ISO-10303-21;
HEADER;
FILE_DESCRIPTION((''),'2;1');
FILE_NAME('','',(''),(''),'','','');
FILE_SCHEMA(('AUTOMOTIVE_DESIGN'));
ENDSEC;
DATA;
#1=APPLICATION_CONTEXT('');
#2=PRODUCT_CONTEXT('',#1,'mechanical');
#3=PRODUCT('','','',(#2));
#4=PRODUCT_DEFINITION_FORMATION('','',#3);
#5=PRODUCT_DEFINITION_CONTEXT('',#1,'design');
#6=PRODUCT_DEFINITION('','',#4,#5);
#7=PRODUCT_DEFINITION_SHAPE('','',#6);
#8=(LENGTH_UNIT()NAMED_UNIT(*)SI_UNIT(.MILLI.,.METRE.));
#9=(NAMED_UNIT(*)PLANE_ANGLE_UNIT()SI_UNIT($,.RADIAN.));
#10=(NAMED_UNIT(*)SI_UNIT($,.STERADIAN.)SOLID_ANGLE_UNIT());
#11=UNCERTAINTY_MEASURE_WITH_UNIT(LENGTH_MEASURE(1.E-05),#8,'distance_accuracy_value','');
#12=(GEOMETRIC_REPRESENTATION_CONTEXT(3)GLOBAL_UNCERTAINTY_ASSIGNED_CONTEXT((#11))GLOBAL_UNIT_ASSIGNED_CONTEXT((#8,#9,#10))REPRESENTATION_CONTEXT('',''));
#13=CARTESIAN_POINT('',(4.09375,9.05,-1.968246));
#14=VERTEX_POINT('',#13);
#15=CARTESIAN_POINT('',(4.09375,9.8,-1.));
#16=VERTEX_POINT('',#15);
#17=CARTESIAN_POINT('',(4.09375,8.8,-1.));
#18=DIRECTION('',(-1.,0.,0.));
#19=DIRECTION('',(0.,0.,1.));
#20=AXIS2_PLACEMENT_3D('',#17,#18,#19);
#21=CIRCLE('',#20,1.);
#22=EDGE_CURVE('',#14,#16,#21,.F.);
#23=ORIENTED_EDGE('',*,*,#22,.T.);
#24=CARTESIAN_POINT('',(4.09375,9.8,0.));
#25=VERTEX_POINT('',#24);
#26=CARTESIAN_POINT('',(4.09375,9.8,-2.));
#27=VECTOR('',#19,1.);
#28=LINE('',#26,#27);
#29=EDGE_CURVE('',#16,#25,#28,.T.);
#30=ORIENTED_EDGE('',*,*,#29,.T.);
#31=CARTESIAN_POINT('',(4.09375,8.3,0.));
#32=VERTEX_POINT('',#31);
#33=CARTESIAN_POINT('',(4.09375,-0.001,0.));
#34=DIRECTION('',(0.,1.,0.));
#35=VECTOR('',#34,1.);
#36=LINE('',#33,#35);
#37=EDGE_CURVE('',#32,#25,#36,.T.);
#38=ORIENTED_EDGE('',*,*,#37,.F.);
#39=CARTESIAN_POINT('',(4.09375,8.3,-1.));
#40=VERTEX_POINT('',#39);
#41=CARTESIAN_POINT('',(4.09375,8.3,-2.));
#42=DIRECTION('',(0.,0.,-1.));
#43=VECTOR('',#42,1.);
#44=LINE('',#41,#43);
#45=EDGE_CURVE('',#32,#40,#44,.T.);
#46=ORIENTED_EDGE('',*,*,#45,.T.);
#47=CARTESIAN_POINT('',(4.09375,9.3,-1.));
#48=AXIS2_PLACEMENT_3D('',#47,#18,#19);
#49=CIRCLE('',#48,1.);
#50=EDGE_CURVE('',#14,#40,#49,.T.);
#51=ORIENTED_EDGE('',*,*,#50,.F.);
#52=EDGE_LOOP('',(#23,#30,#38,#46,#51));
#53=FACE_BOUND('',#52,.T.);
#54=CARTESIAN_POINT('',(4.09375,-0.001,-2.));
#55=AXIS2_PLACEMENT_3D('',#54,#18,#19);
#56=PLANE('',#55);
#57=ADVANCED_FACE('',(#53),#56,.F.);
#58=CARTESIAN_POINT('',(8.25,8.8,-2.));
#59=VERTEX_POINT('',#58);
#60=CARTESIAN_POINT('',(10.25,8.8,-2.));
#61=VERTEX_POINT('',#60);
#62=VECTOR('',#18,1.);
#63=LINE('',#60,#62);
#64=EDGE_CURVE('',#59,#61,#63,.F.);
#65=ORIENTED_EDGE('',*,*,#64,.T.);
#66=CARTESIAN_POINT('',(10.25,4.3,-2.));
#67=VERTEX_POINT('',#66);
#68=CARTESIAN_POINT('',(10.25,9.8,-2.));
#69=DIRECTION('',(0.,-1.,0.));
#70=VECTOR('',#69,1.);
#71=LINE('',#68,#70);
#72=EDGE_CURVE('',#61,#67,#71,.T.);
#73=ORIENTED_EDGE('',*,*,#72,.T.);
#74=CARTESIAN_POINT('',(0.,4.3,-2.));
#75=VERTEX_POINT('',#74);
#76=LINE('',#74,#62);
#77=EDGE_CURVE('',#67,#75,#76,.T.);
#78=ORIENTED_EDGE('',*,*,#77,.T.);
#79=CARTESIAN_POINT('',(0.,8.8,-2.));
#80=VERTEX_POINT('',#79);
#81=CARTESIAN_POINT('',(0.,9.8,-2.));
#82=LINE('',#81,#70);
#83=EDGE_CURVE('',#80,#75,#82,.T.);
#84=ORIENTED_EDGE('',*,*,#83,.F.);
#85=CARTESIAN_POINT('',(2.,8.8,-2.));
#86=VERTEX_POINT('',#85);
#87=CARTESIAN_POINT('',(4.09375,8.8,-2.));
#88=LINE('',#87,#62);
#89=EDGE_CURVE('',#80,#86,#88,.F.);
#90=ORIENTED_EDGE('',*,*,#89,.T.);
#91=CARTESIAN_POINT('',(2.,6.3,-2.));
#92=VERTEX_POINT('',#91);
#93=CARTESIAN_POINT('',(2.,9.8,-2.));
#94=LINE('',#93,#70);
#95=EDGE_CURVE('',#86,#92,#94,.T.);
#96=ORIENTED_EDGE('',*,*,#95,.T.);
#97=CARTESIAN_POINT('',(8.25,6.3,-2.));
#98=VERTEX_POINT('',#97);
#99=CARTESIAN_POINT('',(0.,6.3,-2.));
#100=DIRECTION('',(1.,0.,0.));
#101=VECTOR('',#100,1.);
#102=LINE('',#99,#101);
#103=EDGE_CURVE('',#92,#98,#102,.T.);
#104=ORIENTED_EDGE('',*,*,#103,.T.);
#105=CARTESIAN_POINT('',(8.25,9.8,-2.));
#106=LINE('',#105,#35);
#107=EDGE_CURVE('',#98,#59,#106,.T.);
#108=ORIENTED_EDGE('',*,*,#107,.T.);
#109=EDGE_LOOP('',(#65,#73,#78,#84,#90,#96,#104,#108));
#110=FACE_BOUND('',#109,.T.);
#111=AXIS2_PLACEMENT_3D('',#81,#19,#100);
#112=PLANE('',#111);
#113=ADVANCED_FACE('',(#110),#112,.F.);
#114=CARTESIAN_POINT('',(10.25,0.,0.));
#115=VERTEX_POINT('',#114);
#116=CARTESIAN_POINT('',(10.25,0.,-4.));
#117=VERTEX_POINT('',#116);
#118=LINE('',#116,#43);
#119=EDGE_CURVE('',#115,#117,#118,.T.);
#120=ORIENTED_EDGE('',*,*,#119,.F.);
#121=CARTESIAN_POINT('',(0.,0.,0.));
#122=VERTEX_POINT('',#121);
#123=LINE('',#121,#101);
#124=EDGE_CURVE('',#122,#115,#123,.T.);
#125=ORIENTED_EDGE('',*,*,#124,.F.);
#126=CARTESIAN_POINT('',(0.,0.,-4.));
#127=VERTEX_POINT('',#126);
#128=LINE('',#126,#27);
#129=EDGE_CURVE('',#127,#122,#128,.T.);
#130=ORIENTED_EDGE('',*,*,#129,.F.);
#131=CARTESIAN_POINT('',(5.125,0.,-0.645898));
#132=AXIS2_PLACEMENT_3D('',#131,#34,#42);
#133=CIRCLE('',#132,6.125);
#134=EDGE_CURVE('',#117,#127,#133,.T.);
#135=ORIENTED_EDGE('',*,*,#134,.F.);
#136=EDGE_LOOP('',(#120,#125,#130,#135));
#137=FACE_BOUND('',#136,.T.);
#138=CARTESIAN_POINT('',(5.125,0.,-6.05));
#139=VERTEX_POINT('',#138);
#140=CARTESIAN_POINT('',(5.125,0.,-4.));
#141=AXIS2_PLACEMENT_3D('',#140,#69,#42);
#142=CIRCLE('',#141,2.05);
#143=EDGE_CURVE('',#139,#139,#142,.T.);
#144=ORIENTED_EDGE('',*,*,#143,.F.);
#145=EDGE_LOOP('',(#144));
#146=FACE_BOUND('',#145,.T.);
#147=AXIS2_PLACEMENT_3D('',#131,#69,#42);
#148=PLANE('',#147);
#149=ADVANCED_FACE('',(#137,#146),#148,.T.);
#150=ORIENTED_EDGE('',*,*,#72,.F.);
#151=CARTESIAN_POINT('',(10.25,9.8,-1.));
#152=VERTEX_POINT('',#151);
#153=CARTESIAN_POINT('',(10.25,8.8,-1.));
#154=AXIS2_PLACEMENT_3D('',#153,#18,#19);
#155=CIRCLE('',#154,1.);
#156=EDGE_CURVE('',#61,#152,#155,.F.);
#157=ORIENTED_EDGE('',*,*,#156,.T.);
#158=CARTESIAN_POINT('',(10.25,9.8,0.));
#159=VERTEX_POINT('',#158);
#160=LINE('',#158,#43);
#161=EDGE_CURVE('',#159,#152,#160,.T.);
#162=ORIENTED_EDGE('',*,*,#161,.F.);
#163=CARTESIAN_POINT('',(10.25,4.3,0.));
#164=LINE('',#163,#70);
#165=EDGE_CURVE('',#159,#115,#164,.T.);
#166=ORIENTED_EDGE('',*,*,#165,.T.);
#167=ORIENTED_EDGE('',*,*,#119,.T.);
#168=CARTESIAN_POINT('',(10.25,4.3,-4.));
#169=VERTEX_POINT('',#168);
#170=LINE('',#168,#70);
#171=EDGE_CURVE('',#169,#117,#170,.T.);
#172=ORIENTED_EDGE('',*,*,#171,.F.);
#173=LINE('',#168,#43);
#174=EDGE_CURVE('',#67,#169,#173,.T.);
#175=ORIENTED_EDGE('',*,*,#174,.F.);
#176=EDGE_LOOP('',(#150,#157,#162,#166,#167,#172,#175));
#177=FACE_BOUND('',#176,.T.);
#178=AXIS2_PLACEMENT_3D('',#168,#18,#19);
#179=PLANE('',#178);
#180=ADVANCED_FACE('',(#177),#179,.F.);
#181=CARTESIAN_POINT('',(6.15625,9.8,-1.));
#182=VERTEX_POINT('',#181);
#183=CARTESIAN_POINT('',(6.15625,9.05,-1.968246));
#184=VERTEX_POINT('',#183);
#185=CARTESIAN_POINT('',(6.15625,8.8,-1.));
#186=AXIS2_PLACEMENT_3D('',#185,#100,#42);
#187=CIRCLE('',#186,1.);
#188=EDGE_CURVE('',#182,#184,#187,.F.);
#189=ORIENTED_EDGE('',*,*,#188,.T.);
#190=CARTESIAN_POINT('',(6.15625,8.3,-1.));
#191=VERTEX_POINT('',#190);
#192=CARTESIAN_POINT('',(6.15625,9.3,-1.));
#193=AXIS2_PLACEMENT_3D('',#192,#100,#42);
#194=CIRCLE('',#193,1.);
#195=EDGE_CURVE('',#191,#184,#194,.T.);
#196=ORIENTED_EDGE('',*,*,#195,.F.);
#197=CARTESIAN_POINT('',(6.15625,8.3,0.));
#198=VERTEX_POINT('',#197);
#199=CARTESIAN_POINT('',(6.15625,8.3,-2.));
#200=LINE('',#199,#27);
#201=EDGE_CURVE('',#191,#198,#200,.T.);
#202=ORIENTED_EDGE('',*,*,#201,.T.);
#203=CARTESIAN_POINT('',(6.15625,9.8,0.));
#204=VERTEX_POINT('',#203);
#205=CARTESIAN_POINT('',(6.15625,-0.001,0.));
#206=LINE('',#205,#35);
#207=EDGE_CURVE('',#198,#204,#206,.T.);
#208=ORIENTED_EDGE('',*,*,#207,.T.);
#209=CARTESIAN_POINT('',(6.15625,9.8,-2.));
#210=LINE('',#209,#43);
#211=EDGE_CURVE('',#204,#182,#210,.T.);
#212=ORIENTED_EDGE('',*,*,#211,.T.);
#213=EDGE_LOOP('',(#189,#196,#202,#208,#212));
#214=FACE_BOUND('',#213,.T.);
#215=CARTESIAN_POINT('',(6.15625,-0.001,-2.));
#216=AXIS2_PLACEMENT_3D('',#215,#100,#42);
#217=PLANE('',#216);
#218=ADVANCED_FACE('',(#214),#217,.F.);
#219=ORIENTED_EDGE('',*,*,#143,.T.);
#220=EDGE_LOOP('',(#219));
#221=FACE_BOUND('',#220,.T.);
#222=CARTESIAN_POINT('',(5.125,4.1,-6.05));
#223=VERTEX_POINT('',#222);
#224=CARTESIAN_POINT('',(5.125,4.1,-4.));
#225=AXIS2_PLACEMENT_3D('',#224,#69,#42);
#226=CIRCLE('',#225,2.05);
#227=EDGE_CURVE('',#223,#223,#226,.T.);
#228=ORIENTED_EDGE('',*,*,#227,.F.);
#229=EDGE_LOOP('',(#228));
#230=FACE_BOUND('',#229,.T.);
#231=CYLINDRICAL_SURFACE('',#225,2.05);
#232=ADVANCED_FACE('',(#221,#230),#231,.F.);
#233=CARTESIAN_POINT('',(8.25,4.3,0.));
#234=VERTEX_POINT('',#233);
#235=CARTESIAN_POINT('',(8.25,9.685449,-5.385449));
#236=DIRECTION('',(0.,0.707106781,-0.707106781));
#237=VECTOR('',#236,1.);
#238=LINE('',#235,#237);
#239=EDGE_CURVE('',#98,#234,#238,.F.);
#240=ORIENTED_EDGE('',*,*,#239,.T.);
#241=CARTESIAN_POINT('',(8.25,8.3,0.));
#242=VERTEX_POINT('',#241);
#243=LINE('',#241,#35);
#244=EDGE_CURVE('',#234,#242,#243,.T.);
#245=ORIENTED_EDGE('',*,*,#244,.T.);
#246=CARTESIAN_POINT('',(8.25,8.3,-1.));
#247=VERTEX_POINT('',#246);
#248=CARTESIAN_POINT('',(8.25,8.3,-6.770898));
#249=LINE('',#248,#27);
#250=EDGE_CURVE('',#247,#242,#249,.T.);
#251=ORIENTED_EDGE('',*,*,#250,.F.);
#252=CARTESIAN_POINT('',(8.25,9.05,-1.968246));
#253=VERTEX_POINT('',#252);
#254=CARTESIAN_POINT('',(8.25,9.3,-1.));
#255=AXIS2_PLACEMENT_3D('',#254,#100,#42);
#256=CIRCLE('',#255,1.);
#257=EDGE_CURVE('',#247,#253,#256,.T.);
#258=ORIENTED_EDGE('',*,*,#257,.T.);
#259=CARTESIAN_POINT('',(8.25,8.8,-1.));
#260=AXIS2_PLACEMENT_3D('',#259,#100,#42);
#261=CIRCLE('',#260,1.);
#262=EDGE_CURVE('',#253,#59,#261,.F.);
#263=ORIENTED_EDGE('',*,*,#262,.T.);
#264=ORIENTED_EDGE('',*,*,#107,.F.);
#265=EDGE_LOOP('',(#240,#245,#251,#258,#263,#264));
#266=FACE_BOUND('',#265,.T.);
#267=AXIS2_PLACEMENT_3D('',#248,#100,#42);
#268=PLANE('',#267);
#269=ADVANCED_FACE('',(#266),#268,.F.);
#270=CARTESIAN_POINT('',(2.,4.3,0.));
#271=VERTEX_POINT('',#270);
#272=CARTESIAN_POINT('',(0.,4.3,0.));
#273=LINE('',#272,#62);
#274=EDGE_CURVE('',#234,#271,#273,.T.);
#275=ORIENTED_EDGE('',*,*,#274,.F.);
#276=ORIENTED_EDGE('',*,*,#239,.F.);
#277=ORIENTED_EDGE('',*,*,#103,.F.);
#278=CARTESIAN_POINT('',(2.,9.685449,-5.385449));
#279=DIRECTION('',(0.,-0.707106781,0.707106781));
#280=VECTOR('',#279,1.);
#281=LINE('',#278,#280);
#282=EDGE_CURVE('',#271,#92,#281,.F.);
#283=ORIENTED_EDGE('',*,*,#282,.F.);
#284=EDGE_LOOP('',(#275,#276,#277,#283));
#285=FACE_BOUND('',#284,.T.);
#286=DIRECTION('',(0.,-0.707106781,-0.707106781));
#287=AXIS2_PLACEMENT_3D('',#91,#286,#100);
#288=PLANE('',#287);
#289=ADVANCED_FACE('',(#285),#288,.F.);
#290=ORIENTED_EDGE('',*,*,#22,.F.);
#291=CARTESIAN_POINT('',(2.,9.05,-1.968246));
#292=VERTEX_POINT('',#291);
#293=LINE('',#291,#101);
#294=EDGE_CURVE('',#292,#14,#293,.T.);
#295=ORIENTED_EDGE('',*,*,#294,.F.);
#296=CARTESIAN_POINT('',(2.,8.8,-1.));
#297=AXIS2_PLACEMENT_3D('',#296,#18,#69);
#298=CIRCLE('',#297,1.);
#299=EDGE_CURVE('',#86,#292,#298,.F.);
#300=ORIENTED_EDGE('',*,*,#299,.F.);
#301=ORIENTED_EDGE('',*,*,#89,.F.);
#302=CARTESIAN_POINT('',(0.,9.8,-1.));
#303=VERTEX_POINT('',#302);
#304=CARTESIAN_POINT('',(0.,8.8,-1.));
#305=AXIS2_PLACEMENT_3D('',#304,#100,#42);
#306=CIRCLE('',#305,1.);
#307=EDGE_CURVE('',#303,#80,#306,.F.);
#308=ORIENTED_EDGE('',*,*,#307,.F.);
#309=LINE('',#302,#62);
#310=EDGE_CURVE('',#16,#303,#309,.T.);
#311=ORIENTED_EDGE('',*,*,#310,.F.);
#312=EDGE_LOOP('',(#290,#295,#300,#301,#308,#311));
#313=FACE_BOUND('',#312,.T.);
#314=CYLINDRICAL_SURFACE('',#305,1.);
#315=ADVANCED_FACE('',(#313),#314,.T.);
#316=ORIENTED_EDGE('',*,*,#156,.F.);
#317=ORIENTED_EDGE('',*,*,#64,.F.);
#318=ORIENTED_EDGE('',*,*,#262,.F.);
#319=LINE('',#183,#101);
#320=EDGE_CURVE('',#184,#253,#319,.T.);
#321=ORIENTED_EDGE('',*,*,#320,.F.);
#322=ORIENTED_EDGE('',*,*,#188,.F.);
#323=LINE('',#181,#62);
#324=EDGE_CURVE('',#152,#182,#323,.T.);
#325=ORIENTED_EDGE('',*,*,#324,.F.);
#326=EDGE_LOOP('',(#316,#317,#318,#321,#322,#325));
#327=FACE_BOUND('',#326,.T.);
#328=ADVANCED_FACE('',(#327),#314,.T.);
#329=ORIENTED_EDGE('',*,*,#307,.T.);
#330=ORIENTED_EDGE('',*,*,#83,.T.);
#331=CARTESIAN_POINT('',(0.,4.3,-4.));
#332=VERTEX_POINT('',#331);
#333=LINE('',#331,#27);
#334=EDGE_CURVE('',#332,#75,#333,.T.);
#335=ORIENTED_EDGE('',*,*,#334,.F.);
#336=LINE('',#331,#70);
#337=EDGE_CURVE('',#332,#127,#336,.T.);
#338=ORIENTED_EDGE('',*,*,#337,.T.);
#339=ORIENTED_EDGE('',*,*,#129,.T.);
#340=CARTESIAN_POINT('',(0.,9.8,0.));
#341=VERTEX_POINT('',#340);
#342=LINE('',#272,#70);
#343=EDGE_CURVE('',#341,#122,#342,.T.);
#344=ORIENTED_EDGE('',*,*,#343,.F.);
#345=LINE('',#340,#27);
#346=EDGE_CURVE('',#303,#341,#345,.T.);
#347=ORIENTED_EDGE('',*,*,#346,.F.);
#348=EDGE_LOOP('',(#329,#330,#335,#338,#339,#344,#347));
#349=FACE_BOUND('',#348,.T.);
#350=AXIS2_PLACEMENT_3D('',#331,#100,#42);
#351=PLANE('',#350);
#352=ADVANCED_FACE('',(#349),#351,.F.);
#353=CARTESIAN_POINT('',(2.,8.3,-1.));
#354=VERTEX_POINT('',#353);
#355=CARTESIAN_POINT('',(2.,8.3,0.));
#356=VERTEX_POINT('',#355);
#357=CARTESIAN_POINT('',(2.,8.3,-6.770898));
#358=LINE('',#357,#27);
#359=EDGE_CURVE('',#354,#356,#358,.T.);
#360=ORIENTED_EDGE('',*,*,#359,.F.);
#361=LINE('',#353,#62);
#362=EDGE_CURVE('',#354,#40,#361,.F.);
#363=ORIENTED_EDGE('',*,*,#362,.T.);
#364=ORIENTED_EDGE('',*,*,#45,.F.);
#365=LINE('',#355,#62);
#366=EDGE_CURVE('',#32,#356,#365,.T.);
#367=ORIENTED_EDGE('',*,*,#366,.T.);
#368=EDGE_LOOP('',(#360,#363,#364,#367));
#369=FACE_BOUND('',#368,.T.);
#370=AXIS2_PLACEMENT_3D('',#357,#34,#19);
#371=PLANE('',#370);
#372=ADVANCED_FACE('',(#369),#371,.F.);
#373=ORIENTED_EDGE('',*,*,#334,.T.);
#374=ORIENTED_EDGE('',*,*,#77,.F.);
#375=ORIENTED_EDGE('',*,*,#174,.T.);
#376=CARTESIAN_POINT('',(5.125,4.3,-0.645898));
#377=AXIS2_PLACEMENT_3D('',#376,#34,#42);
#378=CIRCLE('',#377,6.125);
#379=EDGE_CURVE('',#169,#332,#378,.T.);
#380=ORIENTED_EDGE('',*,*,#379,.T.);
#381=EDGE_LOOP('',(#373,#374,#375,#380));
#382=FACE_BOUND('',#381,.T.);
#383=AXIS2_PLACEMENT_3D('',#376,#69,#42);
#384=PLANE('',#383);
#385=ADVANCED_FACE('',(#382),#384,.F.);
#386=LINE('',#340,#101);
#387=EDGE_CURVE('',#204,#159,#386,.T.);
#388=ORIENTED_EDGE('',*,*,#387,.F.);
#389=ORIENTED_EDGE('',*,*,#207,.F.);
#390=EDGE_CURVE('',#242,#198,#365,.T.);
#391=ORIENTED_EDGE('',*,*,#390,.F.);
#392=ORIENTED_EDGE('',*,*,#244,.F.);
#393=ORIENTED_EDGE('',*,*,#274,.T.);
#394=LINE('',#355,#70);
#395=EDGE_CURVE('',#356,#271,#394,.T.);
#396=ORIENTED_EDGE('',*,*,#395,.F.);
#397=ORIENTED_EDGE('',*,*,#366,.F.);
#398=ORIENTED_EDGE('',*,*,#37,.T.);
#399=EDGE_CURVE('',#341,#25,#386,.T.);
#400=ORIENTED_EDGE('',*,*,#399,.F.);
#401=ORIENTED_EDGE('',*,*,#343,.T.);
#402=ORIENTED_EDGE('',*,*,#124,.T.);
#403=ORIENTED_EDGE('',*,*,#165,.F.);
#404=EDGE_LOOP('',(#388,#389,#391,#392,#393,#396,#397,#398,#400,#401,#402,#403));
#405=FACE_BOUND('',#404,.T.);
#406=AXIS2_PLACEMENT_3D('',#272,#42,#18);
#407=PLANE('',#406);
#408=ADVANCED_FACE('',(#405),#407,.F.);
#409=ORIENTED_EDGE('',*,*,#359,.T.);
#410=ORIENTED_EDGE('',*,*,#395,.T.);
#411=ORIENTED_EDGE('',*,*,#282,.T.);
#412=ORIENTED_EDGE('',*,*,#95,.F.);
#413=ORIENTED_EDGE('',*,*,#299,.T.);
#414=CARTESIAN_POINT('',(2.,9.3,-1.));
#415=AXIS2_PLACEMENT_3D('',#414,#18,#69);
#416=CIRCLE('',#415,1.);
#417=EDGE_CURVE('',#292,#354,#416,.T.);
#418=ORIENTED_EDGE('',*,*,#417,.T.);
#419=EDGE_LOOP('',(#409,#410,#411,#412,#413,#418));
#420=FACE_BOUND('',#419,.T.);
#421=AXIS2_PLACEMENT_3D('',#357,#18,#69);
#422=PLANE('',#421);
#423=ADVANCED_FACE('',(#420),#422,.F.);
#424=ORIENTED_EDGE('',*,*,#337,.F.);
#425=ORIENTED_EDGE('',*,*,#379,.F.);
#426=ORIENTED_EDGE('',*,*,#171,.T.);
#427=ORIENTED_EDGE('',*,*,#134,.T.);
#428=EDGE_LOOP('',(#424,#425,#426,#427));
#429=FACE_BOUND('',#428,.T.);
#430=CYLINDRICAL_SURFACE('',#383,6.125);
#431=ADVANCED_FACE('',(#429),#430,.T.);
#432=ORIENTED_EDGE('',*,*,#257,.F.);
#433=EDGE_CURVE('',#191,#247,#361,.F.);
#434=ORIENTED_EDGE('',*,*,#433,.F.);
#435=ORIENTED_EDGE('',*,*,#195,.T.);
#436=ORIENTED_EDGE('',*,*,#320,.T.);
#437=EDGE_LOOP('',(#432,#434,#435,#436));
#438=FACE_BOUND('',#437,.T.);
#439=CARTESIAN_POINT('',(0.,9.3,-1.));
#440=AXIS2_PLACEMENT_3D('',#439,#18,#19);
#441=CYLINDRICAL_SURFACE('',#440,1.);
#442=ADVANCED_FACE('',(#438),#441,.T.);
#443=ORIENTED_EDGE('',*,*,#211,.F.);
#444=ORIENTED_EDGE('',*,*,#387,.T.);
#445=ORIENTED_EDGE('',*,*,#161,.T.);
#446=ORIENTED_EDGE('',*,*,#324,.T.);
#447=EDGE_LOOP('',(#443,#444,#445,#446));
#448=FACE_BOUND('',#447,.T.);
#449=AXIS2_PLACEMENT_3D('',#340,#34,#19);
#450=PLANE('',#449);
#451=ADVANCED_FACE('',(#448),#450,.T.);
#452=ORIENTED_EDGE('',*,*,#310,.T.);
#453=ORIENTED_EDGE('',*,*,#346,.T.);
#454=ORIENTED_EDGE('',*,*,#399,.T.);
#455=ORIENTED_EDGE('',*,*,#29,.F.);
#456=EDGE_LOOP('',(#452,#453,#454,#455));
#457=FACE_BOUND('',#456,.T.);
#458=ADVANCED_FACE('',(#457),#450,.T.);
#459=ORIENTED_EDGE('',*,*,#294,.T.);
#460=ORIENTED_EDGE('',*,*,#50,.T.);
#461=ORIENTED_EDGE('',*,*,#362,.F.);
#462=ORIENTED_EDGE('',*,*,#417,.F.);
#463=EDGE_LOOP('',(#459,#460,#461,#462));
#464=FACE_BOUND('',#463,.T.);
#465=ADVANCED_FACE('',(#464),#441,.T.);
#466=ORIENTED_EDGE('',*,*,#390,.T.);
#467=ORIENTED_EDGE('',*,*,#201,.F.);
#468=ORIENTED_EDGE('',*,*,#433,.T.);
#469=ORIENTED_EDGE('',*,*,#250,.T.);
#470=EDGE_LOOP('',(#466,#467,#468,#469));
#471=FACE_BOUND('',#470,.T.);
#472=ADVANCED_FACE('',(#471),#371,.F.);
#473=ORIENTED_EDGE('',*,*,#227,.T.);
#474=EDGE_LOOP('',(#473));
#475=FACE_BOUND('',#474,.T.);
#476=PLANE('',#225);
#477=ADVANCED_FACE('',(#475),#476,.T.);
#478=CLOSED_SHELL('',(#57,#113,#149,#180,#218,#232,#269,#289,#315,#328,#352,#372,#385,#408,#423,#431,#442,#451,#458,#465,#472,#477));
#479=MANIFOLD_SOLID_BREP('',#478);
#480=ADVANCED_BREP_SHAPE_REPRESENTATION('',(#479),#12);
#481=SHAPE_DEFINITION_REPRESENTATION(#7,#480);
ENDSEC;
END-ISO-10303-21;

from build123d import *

# Parameters (mm, degrees)
PROFILEBOSS_EXTRUDE1_DEPTH    = 4.3
ANGLESKETCH7_W                = 10.25
ANGLESKETCH7_H                = 2
ANGLEBOSS_EXTRUDE3_DEPTH      = 5.5
UNDERROLLERSKETCH10_W         = 6.25
UNDERROLLERSKETCH10_H         = 2
UNDERROLLERCUT_EXTRUDE5_DEPTH = 16.714565224
UNDERFILLET22_R               = 1
OPENNINGCUT_EXTRUDE1_REACH    = 17.715
SKETCH2_W                     = 2.0625
SKETCH2_H                     = 2
OUTCHAMFER1_SIZE              = 2
TOPFILLET1_R                  = 1
CLAMPMOUNTHOLESKETCH3_R       = 2.05
CUT_EXTRUDE1_DEPTH            = 4.1


with BuildPart() as part:
    # Sketch1 → ProfileBoss-Extrude1 (new body)
    with BuildSketch(Plane(origin=(0, 0, 0), x_dir=(1, 0, 0), z_dir=(0, 1, 0))):
        with BuildLine():
            Line((10.25, 4), (10.25, 0))
            Line((10.25, 0), (0, 0))
            Line((0, 0), (0, 4))
            ThreePointArc((0, 4), (5.125, 6.770898034), (10.25, 4))
        make_face()
    extrude(amount=PROFILEBOSS_EXTRUDE1_DEPTH)

    # AngleSketch7 → AngleBoss-Extrude3 (add)
    with BuildSketch(Plane(origin=(0, 4.3, 0), x_dir=(1, 0, 0), z_dir=(0, 1, 0))):
        with Locations((5.125, 1)):
            Rectangle(ANGLESKETCH7_W, ANGLESKETCH7_H)
    extrude(amount=ANGLEBOSS_EXTRUDE3_DEPTH)

    # UnderRollerSketch10 → UnderRollerCut-Extrude5 (cut, through all)
    with BuildSketch(Plane.XY):
        with Locations((5.125, 7.3)):
            Rectangle(UNDERROLLERSKETCH10_W, UNDERROLLERSKETCH10_H)
    extrude(amount=-UNDERROLLERCUT_EXTRUDE5_DEPTH, mode=Mode.SUBTRACT)

    # UnderFillet22
    underfillet22_edges = [part.edges().sort_by_distance(p)[0] for p in [
        (5.125, 8.3, -2),
    ]]
    fillet(underfillet22_edges, radius=UNDERFILLET22_R)

    # Sketch2 → OpenningCut-Extrude1 (cut, up to next)
    with BuildSketch(Plane(origin=(0, 9.8, 0), x_dir=(1, 0, 0), z_dir=(0, 1, 0)), mode=Mode.PRIVATE) as openningcut_extrude1_sk1:
        with Locations((5.125, 1)):
            Rectangle(SKETCH2_W, SKETCH2_H)
    openningcut_extrude1_tool1 = extrude(openningcut_extrude1_sk1.sketch, amount=-OPENNINGCUT_EXTRUDE1_REACH, mode=Mode.PRIVATE) & part.part
    add(openningcut_extrude1_tool1.solids().sort_by_distance((5.125, 9.8, -1))[0], mode=Mode.SUBTRACT)

    # OutChamfer1
    outchamfer1_edges = [part.edges().sort_by_distance(p)[0] for p in [
        (5.125, 6.3, 0),
    ]]
    chamfer(outchamfer1_edges, length=OUTCHAMFER1_SIZE - 0.0001)  # a hair under: the kernel refuses the full size

    # TopFillet1
    topfillet1_edges = [part.edges().sort_by_distance(p)[0] for p in [
        (8.203125, 9.8, -2),
        (2.046875, 9.8, -2),
    ]]
    fillet(topfillet1_edges, radius=TOPFILLET1_R)

    # ClampMountHoleSketch3 → Cut-Extrude1 (cut)
    with BuildSketch(Plane.XZ):
        with Locations(Location((5.125, -4, 0), (0, 0, 270))):
            Circle(CLAMPMOUNTHOLESKETCH3_R)
    extrude(amount=-CUT_EXTRUDE1_DEPTH, mode=Mode.SUBTRACT)


solid = part.part
